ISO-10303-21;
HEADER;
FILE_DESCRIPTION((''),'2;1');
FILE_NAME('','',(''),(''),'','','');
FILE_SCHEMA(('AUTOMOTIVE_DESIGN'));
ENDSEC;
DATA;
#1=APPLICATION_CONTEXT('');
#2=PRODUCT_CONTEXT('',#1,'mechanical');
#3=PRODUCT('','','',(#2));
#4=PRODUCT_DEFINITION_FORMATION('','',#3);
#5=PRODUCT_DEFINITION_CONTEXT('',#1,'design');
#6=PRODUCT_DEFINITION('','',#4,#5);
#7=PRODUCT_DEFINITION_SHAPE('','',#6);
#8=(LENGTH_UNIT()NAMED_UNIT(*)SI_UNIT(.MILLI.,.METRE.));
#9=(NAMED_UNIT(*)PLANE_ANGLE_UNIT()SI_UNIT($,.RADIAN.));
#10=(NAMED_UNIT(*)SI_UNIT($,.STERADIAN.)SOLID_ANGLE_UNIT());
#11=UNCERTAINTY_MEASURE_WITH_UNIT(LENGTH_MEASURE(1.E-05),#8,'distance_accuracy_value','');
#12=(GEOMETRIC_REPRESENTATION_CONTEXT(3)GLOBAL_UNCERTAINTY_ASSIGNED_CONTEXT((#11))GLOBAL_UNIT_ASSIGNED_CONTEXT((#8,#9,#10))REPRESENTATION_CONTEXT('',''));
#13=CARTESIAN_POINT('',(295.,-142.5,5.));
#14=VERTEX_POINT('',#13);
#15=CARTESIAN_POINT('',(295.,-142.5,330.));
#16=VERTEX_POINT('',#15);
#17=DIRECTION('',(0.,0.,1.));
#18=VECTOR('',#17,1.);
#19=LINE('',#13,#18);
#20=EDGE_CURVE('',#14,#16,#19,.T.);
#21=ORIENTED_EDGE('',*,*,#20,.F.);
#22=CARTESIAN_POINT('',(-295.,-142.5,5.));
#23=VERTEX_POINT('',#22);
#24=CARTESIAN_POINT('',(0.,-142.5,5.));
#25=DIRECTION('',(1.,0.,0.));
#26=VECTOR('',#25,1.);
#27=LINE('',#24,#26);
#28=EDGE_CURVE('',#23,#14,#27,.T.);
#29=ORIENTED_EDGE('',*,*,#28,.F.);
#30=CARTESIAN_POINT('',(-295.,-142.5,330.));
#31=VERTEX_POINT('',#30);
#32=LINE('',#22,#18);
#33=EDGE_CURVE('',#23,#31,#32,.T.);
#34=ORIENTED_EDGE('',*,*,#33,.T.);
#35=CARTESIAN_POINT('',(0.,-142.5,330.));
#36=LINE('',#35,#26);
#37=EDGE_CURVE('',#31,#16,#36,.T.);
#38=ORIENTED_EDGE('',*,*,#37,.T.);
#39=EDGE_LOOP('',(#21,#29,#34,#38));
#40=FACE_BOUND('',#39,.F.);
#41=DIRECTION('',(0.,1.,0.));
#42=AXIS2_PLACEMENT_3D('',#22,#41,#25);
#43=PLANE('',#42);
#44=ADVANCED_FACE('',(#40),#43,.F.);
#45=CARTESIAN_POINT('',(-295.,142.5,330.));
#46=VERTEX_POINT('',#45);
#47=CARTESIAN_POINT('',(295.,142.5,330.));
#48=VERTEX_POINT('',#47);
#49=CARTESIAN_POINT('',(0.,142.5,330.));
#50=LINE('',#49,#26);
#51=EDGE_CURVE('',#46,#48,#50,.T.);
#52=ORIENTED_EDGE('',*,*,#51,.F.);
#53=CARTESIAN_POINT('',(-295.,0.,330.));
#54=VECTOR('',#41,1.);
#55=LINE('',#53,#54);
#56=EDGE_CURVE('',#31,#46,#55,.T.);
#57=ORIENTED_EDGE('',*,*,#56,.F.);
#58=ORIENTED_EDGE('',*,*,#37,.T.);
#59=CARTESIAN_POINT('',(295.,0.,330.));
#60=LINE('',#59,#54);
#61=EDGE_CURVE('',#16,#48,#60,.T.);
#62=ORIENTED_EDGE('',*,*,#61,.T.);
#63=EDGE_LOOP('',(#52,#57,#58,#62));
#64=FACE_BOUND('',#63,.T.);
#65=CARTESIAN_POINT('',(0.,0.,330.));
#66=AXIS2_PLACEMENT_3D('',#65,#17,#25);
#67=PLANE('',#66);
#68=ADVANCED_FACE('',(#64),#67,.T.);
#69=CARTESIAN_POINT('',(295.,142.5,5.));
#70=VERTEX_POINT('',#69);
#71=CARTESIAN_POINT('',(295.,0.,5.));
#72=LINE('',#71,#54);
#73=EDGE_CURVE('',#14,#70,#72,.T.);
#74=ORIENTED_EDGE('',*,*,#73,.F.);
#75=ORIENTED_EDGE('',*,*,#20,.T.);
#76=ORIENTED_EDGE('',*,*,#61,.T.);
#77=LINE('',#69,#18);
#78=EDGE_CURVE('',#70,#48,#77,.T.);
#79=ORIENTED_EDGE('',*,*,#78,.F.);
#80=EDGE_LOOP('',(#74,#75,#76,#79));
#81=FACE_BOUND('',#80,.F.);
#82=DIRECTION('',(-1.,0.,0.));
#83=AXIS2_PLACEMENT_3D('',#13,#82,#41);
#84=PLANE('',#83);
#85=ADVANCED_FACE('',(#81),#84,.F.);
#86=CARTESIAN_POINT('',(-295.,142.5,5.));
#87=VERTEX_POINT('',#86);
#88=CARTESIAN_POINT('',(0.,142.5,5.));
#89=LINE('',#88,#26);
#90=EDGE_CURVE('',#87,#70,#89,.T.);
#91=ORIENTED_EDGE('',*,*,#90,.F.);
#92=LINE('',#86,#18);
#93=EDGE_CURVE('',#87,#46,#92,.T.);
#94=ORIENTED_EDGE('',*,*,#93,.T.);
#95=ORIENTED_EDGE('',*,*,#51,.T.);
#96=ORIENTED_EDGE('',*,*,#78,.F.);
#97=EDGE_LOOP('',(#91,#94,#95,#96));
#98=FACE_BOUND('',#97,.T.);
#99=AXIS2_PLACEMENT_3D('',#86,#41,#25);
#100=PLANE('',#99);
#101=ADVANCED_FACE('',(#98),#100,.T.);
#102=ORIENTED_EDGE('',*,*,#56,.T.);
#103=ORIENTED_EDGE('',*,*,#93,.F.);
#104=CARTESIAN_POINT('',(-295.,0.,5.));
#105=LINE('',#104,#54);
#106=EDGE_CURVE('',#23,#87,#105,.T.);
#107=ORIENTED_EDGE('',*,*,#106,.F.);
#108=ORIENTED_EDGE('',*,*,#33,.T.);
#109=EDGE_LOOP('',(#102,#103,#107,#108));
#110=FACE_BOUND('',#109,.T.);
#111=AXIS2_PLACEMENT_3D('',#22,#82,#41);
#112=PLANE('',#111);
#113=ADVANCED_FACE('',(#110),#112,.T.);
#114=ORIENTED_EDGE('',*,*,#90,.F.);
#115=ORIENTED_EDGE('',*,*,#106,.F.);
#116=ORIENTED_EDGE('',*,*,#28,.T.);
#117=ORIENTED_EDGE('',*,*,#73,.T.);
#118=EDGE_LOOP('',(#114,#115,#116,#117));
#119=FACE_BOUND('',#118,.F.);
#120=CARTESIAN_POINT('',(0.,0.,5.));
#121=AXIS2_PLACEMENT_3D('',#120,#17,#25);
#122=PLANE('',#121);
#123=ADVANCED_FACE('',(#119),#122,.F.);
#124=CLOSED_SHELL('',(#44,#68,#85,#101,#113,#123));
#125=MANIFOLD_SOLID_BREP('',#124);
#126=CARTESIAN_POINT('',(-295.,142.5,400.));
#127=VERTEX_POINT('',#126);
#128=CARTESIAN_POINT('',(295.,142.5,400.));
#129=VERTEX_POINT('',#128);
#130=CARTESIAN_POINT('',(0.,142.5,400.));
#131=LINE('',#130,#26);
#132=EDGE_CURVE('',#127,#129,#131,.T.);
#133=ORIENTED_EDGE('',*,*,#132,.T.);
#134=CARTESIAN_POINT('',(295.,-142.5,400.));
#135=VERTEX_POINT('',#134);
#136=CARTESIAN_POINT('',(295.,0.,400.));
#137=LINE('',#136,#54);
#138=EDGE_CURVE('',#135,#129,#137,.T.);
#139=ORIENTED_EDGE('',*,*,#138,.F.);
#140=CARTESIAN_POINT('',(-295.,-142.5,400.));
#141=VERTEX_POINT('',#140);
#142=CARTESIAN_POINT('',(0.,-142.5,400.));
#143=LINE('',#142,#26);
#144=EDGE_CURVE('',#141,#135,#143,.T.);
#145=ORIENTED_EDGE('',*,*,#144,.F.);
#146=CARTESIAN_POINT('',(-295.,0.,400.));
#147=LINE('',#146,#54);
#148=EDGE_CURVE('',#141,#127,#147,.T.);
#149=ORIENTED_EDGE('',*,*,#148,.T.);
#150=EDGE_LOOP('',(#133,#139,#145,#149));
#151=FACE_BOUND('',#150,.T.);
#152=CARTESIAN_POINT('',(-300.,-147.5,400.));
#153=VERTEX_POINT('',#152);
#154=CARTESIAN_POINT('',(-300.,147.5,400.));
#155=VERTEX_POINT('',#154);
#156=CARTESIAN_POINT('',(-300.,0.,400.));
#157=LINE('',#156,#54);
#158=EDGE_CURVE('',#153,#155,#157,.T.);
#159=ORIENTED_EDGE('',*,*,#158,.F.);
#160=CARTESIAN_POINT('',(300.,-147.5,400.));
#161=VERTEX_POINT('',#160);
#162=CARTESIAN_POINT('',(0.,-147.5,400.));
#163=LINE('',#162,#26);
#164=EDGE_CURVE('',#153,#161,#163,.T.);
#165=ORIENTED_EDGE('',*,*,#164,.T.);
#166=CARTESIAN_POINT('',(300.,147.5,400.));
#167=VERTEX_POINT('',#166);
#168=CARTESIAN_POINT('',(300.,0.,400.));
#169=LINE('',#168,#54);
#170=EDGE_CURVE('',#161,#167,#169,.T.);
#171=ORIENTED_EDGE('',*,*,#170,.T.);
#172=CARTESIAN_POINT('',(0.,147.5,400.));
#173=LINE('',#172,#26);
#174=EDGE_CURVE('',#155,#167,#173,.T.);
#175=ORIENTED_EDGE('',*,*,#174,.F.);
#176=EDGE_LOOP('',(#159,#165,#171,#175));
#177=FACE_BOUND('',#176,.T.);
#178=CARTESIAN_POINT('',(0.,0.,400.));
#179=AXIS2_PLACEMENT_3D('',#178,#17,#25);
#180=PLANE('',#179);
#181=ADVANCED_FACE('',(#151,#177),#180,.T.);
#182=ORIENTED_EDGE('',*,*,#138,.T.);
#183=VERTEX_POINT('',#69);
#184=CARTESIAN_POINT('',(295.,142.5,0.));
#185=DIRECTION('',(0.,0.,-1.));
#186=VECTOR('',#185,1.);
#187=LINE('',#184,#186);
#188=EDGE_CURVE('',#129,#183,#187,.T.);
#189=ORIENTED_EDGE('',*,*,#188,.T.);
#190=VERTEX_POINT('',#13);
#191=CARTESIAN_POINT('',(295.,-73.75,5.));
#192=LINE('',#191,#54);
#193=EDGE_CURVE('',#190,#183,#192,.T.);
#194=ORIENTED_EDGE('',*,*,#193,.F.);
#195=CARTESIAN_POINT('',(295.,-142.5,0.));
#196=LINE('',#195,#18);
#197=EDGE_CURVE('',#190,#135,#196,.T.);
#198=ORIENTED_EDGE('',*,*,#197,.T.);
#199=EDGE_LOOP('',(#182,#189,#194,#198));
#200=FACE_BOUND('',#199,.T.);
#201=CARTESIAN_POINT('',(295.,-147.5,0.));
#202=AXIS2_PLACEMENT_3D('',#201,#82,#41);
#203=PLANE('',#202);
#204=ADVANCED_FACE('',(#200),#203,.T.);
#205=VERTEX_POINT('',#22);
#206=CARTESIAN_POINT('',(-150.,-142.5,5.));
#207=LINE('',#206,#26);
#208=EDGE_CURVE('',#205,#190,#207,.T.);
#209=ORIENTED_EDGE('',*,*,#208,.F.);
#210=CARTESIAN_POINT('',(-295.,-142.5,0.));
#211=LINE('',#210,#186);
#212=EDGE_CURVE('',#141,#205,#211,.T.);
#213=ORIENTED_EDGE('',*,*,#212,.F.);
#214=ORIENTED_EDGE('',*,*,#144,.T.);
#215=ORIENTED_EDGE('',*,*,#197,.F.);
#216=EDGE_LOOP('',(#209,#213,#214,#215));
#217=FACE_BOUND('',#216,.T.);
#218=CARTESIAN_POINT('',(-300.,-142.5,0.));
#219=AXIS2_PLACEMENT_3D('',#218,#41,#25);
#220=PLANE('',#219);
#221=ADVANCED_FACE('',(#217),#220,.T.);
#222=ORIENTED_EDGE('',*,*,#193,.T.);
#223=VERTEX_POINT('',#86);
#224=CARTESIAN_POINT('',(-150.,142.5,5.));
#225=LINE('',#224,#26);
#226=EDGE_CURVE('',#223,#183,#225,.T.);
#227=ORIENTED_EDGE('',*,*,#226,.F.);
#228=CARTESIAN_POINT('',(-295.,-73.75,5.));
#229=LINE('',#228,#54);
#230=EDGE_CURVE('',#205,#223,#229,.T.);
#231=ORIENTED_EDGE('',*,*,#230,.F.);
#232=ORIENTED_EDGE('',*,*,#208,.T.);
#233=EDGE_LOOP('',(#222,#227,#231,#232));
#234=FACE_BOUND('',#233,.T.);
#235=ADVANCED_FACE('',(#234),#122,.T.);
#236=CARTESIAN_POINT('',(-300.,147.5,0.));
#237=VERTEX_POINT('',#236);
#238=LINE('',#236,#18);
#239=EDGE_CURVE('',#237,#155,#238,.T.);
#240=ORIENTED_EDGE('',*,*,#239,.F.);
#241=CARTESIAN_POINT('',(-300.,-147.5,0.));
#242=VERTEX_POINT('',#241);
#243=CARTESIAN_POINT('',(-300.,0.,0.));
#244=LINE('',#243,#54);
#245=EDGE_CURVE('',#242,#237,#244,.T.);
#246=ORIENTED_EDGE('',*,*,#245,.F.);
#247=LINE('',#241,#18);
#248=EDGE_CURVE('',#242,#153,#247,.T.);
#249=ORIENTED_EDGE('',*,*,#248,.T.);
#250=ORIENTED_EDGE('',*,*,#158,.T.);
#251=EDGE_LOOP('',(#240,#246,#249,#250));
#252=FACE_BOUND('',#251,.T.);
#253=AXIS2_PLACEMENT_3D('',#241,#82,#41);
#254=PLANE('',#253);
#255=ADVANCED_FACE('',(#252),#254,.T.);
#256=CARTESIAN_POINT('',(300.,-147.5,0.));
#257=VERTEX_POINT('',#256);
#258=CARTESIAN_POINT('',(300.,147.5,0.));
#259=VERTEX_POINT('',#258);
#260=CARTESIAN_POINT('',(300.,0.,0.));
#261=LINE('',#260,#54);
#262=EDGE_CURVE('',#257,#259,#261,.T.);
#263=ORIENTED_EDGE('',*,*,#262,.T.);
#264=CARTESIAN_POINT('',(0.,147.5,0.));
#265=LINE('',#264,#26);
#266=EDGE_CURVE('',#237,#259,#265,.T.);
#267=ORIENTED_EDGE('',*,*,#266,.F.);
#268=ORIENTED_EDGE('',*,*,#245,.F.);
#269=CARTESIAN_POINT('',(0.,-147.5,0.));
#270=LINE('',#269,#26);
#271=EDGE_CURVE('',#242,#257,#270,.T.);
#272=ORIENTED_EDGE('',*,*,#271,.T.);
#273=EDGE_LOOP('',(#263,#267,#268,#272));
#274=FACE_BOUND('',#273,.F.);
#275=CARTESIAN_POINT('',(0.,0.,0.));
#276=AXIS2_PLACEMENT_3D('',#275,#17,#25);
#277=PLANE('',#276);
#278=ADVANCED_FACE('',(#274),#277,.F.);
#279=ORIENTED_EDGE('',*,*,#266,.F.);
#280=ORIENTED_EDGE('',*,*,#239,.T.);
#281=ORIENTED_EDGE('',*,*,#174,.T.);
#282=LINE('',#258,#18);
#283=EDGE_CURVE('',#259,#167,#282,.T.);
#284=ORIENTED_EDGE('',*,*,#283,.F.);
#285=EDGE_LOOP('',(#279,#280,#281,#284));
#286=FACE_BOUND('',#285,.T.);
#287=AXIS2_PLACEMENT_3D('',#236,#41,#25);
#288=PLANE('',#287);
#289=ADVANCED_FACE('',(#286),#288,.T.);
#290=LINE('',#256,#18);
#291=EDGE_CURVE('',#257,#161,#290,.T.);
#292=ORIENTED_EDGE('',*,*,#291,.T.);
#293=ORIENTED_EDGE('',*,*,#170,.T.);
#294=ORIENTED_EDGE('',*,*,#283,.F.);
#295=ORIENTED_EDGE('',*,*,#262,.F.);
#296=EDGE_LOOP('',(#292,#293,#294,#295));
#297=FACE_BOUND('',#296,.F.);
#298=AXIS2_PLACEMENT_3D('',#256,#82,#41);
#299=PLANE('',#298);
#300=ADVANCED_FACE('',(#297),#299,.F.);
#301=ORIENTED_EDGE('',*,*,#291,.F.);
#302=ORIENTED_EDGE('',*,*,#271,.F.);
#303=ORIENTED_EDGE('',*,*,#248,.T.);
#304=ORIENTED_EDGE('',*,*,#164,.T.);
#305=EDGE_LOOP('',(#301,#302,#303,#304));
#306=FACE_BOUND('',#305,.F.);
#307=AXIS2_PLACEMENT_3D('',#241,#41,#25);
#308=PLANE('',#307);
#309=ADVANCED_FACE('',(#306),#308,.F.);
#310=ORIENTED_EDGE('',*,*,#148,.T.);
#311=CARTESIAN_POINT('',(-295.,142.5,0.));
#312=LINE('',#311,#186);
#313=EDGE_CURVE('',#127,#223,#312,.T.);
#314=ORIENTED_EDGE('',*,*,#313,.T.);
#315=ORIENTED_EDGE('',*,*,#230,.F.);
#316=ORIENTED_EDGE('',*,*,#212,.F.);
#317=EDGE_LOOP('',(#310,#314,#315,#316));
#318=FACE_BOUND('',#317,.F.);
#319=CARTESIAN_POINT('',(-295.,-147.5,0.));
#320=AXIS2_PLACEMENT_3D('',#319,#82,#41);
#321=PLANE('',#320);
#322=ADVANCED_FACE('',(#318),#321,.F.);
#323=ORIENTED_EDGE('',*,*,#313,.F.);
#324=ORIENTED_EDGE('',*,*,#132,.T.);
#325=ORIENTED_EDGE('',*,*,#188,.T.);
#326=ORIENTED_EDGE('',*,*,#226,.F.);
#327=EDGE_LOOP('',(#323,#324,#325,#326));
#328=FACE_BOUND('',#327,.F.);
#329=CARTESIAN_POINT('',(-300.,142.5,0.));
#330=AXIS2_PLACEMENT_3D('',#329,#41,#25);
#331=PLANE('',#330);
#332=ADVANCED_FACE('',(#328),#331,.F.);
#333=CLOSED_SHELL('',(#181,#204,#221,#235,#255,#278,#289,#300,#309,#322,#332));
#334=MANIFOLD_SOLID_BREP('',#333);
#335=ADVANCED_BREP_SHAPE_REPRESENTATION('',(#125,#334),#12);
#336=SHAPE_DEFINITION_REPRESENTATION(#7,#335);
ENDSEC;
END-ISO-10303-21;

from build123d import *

# Parameters (mm, degrees)
F0_W     = 600
F0_H     = 295
F1_DEPTH = 400
F2_T     = -5
F3_W     = 590
F3_H     = 285
F4_DEPTH = 325


with BuildPart() as f1:
    # F0 (on Top) → F1 (new body)
    with BuildSketch(Plane.XY):
        Rectangle(F0_W, F0_H)
    extrude(amount=F1_DEPTH)

    # F2
    f2_openings = [f1.faces().sort_by_distance(p)[0] for p in [
        (0, 0, 400),
    ]]
    offset(amount=F2_T, openings=f2_openings)


with BuildPart() as f4:
    # F3 (on face) → F4 (new body)
    with BuildSketch(Plane.XY.offset(5)):
        Rectangle(F3_W, F3_H)
    extrude(amount=F4_DEPTH)


solid = Compound([f1.part, f4.part])
